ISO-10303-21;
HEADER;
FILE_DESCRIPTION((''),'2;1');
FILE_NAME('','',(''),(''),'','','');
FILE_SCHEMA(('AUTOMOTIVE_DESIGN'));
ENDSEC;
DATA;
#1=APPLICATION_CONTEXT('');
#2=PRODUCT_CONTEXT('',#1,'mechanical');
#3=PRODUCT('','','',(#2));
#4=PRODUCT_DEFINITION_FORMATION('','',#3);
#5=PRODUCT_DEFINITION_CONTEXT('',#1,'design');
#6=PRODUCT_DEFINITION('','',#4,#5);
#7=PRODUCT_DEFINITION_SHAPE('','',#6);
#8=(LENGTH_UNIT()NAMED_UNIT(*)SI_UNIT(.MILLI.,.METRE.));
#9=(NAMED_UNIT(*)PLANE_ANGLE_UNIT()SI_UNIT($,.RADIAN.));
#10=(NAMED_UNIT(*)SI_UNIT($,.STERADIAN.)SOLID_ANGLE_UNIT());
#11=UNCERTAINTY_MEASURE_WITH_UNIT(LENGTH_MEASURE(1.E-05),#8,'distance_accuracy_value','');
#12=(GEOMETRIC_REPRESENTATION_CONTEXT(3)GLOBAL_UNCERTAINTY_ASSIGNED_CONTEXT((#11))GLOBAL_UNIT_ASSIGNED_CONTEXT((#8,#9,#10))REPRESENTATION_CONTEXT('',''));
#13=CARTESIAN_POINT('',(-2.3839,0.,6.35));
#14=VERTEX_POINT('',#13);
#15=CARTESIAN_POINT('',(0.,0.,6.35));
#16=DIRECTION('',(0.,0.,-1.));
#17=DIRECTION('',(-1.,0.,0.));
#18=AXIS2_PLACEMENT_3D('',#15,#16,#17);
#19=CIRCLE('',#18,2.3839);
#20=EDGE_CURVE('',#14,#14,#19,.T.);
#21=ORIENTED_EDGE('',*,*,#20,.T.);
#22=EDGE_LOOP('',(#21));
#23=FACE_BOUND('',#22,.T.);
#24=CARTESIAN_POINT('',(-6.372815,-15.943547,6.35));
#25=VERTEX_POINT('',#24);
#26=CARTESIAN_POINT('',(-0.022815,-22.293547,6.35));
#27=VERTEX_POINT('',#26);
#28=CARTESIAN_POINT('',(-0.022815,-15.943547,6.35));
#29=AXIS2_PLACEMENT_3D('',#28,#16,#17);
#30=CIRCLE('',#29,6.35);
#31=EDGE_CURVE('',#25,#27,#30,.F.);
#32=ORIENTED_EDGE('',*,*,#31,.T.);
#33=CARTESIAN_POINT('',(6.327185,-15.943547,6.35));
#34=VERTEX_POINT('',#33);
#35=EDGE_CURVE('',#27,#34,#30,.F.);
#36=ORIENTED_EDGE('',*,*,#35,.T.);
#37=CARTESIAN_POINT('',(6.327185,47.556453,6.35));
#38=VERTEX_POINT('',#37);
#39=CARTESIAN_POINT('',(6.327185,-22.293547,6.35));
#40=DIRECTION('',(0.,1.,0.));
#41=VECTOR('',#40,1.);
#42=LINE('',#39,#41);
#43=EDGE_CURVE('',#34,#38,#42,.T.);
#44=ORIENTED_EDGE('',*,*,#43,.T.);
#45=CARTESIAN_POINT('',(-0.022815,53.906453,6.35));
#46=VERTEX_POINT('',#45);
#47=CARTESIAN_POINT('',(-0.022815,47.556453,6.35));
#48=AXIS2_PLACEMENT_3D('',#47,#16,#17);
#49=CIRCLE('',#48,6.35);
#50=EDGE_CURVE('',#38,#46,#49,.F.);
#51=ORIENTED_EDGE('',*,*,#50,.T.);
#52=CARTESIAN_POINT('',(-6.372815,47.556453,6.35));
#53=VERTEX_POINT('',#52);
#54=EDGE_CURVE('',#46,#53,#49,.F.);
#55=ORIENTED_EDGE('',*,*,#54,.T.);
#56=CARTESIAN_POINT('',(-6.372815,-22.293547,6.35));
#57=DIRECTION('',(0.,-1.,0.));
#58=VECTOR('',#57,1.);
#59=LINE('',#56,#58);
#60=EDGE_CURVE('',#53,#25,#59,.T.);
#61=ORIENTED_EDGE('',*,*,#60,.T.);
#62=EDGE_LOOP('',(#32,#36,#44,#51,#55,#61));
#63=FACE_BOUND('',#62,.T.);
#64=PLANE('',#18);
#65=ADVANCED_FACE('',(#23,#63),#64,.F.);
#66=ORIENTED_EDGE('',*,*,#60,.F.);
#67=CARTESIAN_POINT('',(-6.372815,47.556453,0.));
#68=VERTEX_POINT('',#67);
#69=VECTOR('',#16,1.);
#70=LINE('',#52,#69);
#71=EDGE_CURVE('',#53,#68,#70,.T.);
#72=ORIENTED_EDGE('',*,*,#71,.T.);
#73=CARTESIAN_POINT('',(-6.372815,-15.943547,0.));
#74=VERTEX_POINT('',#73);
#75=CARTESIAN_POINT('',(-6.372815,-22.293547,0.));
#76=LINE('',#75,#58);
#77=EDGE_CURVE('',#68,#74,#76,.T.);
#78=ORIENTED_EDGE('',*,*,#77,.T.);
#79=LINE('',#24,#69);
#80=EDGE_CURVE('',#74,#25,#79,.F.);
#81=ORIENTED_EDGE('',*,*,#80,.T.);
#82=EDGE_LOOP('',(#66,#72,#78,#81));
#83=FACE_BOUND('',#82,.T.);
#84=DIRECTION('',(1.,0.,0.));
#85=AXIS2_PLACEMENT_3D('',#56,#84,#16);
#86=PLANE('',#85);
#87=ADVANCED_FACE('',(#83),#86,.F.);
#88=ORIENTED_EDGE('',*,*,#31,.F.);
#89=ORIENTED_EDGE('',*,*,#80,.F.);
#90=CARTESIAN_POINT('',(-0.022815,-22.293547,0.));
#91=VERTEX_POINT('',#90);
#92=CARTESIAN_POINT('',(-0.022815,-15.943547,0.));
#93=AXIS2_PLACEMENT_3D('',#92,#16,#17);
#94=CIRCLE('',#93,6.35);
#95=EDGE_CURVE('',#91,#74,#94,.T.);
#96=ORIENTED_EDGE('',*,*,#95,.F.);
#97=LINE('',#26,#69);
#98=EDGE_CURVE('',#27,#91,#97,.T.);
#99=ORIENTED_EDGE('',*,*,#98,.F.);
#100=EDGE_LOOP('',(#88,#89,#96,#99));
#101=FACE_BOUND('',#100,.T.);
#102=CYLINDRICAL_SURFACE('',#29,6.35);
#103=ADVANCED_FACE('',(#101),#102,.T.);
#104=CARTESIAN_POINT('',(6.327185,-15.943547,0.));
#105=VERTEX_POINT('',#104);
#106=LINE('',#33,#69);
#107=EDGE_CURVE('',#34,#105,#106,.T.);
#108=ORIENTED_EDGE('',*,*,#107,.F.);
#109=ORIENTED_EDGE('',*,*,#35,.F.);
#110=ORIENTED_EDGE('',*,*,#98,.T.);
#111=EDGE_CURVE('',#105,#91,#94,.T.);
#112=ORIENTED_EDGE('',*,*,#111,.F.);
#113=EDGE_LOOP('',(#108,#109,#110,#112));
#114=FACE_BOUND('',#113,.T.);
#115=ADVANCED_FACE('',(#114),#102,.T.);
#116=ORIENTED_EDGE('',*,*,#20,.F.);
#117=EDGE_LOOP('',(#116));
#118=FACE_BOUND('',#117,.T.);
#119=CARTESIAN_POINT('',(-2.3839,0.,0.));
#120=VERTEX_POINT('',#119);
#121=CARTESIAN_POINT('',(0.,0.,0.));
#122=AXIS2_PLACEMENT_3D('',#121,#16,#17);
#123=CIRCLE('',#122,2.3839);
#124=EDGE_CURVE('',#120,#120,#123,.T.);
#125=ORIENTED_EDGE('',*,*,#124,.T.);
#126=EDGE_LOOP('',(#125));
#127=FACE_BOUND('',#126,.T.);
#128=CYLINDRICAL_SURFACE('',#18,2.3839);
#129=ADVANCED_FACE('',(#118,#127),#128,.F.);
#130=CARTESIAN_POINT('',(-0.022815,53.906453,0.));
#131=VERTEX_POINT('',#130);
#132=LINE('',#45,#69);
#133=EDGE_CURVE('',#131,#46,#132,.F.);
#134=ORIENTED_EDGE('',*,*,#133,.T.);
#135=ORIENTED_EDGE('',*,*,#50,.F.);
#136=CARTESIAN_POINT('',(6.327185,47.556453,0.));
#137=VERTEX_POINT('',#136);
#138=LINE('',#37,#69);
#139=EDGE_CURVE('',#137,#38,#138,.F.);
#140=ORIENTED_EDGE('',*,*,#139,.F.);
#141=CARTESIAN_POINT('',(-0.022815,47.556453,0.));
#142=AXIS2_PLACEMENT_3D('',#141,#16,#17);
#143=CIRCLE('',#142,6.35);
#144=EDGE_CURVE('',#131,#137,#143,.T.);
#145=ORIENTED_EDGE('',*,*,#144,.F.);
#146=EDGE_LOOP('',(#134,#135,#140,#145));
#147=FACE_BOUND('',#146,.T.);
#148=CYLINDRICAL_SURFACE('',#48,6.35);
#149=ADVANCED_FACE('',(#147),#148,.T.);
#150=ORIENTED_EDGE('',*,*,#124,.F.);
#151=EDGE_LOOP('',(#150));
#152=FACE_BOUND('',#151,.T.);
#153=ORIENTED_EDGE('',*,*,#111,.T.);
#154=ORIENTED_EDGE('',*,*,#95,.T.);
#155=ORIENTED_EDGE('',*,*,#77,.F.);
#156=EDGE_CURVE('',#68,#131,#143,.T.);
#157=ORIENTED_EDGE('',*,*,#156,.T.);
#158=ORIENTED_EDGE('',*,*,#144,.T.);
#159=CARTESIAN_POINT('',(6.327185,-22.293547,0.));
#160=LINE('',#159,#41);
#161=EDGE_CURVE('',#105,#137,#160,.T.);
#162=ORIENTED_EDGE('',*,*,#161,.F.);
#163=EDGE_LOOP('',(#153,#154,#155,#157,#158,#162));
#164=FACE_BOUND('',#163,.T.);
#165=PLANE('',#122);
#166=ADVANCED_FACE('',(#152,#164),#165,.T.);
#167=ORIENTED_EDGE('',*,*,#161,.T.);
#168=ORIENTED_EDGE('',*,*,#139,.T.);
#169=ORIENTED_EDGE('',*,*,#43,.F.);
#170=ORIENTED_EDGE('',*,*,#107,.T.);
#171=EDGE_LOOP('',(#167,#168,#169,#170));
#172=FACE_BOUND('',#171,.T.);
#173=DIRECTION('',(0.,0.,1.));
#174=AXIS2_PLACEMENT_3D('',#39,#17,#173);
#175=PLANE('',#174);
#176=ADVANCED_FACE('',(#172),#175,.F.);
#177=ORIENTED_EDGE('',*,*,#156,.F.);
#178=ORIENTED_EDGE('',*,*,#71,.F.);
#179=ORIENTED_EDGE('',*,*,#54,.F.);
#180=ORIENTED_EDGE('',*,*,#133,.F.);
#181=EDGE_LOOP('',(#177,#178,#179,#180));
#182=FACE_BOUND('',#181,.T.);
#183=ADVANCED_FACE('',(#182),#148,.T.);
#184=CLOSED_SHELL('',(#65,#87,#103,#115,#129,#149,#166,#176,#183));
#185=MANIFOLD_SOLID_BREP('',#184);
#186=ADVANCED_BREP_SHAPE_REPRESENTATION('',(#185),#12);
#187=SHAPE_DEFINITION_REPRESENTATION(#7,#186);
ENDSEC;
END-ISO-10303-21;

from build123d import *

# Parameters (mm, degrees)
SKETCH1_W           = 12.7
SKETCH1_H           = 76.2
BOSS_EXTRUDE1_DEPTH = 6.35
SKETCH2_R           = 2.383900133
CUT_EXTRUDE1_DEPTH  = 55.651998855
FILLET1_R           = 6.35


with BuildPart() as part:
    # Sketch1 → Boss-Extrude1 (new body)
    with BuildSketch(Plane.XY):
        with Locations((-0.022814859, 15.806453321)):
            Rectangle(SKETCH1_W, SKETCH1_H)
    extrude(amount=BOSS_EXTRUDE1_DEPTH)

    # Sketch2 → Cut-Extrude1 (cut, through all)
    with BuildSketch(Plane(origin=(0, 0, 0), x_dir=(-1, 0, 0), z_dir=(0, 0, -1))):
        Circle(SKETCH2_R)
    extrude(amount=-CUT_EXTRUDE1_DEPTH, mode=Mode.SUBTRACT)

    # Fillet1
    fillet1_edges = [part.edges().sort_by_distance(p)[0] for p in [
        (6.327185141, -22.293546679, 3.175),
        (-6.372814859, -22.293546679, 3.175),
        (6.327185141, 53.906453321, 3.175),
        (-6.372814859, 53.906453321, 3.175),
    ]]
    fillet(fillet1_edges, radius=FILLET1_R - 0.0001)  # a hair under: the kernel refuses the full size


solid = part.part
